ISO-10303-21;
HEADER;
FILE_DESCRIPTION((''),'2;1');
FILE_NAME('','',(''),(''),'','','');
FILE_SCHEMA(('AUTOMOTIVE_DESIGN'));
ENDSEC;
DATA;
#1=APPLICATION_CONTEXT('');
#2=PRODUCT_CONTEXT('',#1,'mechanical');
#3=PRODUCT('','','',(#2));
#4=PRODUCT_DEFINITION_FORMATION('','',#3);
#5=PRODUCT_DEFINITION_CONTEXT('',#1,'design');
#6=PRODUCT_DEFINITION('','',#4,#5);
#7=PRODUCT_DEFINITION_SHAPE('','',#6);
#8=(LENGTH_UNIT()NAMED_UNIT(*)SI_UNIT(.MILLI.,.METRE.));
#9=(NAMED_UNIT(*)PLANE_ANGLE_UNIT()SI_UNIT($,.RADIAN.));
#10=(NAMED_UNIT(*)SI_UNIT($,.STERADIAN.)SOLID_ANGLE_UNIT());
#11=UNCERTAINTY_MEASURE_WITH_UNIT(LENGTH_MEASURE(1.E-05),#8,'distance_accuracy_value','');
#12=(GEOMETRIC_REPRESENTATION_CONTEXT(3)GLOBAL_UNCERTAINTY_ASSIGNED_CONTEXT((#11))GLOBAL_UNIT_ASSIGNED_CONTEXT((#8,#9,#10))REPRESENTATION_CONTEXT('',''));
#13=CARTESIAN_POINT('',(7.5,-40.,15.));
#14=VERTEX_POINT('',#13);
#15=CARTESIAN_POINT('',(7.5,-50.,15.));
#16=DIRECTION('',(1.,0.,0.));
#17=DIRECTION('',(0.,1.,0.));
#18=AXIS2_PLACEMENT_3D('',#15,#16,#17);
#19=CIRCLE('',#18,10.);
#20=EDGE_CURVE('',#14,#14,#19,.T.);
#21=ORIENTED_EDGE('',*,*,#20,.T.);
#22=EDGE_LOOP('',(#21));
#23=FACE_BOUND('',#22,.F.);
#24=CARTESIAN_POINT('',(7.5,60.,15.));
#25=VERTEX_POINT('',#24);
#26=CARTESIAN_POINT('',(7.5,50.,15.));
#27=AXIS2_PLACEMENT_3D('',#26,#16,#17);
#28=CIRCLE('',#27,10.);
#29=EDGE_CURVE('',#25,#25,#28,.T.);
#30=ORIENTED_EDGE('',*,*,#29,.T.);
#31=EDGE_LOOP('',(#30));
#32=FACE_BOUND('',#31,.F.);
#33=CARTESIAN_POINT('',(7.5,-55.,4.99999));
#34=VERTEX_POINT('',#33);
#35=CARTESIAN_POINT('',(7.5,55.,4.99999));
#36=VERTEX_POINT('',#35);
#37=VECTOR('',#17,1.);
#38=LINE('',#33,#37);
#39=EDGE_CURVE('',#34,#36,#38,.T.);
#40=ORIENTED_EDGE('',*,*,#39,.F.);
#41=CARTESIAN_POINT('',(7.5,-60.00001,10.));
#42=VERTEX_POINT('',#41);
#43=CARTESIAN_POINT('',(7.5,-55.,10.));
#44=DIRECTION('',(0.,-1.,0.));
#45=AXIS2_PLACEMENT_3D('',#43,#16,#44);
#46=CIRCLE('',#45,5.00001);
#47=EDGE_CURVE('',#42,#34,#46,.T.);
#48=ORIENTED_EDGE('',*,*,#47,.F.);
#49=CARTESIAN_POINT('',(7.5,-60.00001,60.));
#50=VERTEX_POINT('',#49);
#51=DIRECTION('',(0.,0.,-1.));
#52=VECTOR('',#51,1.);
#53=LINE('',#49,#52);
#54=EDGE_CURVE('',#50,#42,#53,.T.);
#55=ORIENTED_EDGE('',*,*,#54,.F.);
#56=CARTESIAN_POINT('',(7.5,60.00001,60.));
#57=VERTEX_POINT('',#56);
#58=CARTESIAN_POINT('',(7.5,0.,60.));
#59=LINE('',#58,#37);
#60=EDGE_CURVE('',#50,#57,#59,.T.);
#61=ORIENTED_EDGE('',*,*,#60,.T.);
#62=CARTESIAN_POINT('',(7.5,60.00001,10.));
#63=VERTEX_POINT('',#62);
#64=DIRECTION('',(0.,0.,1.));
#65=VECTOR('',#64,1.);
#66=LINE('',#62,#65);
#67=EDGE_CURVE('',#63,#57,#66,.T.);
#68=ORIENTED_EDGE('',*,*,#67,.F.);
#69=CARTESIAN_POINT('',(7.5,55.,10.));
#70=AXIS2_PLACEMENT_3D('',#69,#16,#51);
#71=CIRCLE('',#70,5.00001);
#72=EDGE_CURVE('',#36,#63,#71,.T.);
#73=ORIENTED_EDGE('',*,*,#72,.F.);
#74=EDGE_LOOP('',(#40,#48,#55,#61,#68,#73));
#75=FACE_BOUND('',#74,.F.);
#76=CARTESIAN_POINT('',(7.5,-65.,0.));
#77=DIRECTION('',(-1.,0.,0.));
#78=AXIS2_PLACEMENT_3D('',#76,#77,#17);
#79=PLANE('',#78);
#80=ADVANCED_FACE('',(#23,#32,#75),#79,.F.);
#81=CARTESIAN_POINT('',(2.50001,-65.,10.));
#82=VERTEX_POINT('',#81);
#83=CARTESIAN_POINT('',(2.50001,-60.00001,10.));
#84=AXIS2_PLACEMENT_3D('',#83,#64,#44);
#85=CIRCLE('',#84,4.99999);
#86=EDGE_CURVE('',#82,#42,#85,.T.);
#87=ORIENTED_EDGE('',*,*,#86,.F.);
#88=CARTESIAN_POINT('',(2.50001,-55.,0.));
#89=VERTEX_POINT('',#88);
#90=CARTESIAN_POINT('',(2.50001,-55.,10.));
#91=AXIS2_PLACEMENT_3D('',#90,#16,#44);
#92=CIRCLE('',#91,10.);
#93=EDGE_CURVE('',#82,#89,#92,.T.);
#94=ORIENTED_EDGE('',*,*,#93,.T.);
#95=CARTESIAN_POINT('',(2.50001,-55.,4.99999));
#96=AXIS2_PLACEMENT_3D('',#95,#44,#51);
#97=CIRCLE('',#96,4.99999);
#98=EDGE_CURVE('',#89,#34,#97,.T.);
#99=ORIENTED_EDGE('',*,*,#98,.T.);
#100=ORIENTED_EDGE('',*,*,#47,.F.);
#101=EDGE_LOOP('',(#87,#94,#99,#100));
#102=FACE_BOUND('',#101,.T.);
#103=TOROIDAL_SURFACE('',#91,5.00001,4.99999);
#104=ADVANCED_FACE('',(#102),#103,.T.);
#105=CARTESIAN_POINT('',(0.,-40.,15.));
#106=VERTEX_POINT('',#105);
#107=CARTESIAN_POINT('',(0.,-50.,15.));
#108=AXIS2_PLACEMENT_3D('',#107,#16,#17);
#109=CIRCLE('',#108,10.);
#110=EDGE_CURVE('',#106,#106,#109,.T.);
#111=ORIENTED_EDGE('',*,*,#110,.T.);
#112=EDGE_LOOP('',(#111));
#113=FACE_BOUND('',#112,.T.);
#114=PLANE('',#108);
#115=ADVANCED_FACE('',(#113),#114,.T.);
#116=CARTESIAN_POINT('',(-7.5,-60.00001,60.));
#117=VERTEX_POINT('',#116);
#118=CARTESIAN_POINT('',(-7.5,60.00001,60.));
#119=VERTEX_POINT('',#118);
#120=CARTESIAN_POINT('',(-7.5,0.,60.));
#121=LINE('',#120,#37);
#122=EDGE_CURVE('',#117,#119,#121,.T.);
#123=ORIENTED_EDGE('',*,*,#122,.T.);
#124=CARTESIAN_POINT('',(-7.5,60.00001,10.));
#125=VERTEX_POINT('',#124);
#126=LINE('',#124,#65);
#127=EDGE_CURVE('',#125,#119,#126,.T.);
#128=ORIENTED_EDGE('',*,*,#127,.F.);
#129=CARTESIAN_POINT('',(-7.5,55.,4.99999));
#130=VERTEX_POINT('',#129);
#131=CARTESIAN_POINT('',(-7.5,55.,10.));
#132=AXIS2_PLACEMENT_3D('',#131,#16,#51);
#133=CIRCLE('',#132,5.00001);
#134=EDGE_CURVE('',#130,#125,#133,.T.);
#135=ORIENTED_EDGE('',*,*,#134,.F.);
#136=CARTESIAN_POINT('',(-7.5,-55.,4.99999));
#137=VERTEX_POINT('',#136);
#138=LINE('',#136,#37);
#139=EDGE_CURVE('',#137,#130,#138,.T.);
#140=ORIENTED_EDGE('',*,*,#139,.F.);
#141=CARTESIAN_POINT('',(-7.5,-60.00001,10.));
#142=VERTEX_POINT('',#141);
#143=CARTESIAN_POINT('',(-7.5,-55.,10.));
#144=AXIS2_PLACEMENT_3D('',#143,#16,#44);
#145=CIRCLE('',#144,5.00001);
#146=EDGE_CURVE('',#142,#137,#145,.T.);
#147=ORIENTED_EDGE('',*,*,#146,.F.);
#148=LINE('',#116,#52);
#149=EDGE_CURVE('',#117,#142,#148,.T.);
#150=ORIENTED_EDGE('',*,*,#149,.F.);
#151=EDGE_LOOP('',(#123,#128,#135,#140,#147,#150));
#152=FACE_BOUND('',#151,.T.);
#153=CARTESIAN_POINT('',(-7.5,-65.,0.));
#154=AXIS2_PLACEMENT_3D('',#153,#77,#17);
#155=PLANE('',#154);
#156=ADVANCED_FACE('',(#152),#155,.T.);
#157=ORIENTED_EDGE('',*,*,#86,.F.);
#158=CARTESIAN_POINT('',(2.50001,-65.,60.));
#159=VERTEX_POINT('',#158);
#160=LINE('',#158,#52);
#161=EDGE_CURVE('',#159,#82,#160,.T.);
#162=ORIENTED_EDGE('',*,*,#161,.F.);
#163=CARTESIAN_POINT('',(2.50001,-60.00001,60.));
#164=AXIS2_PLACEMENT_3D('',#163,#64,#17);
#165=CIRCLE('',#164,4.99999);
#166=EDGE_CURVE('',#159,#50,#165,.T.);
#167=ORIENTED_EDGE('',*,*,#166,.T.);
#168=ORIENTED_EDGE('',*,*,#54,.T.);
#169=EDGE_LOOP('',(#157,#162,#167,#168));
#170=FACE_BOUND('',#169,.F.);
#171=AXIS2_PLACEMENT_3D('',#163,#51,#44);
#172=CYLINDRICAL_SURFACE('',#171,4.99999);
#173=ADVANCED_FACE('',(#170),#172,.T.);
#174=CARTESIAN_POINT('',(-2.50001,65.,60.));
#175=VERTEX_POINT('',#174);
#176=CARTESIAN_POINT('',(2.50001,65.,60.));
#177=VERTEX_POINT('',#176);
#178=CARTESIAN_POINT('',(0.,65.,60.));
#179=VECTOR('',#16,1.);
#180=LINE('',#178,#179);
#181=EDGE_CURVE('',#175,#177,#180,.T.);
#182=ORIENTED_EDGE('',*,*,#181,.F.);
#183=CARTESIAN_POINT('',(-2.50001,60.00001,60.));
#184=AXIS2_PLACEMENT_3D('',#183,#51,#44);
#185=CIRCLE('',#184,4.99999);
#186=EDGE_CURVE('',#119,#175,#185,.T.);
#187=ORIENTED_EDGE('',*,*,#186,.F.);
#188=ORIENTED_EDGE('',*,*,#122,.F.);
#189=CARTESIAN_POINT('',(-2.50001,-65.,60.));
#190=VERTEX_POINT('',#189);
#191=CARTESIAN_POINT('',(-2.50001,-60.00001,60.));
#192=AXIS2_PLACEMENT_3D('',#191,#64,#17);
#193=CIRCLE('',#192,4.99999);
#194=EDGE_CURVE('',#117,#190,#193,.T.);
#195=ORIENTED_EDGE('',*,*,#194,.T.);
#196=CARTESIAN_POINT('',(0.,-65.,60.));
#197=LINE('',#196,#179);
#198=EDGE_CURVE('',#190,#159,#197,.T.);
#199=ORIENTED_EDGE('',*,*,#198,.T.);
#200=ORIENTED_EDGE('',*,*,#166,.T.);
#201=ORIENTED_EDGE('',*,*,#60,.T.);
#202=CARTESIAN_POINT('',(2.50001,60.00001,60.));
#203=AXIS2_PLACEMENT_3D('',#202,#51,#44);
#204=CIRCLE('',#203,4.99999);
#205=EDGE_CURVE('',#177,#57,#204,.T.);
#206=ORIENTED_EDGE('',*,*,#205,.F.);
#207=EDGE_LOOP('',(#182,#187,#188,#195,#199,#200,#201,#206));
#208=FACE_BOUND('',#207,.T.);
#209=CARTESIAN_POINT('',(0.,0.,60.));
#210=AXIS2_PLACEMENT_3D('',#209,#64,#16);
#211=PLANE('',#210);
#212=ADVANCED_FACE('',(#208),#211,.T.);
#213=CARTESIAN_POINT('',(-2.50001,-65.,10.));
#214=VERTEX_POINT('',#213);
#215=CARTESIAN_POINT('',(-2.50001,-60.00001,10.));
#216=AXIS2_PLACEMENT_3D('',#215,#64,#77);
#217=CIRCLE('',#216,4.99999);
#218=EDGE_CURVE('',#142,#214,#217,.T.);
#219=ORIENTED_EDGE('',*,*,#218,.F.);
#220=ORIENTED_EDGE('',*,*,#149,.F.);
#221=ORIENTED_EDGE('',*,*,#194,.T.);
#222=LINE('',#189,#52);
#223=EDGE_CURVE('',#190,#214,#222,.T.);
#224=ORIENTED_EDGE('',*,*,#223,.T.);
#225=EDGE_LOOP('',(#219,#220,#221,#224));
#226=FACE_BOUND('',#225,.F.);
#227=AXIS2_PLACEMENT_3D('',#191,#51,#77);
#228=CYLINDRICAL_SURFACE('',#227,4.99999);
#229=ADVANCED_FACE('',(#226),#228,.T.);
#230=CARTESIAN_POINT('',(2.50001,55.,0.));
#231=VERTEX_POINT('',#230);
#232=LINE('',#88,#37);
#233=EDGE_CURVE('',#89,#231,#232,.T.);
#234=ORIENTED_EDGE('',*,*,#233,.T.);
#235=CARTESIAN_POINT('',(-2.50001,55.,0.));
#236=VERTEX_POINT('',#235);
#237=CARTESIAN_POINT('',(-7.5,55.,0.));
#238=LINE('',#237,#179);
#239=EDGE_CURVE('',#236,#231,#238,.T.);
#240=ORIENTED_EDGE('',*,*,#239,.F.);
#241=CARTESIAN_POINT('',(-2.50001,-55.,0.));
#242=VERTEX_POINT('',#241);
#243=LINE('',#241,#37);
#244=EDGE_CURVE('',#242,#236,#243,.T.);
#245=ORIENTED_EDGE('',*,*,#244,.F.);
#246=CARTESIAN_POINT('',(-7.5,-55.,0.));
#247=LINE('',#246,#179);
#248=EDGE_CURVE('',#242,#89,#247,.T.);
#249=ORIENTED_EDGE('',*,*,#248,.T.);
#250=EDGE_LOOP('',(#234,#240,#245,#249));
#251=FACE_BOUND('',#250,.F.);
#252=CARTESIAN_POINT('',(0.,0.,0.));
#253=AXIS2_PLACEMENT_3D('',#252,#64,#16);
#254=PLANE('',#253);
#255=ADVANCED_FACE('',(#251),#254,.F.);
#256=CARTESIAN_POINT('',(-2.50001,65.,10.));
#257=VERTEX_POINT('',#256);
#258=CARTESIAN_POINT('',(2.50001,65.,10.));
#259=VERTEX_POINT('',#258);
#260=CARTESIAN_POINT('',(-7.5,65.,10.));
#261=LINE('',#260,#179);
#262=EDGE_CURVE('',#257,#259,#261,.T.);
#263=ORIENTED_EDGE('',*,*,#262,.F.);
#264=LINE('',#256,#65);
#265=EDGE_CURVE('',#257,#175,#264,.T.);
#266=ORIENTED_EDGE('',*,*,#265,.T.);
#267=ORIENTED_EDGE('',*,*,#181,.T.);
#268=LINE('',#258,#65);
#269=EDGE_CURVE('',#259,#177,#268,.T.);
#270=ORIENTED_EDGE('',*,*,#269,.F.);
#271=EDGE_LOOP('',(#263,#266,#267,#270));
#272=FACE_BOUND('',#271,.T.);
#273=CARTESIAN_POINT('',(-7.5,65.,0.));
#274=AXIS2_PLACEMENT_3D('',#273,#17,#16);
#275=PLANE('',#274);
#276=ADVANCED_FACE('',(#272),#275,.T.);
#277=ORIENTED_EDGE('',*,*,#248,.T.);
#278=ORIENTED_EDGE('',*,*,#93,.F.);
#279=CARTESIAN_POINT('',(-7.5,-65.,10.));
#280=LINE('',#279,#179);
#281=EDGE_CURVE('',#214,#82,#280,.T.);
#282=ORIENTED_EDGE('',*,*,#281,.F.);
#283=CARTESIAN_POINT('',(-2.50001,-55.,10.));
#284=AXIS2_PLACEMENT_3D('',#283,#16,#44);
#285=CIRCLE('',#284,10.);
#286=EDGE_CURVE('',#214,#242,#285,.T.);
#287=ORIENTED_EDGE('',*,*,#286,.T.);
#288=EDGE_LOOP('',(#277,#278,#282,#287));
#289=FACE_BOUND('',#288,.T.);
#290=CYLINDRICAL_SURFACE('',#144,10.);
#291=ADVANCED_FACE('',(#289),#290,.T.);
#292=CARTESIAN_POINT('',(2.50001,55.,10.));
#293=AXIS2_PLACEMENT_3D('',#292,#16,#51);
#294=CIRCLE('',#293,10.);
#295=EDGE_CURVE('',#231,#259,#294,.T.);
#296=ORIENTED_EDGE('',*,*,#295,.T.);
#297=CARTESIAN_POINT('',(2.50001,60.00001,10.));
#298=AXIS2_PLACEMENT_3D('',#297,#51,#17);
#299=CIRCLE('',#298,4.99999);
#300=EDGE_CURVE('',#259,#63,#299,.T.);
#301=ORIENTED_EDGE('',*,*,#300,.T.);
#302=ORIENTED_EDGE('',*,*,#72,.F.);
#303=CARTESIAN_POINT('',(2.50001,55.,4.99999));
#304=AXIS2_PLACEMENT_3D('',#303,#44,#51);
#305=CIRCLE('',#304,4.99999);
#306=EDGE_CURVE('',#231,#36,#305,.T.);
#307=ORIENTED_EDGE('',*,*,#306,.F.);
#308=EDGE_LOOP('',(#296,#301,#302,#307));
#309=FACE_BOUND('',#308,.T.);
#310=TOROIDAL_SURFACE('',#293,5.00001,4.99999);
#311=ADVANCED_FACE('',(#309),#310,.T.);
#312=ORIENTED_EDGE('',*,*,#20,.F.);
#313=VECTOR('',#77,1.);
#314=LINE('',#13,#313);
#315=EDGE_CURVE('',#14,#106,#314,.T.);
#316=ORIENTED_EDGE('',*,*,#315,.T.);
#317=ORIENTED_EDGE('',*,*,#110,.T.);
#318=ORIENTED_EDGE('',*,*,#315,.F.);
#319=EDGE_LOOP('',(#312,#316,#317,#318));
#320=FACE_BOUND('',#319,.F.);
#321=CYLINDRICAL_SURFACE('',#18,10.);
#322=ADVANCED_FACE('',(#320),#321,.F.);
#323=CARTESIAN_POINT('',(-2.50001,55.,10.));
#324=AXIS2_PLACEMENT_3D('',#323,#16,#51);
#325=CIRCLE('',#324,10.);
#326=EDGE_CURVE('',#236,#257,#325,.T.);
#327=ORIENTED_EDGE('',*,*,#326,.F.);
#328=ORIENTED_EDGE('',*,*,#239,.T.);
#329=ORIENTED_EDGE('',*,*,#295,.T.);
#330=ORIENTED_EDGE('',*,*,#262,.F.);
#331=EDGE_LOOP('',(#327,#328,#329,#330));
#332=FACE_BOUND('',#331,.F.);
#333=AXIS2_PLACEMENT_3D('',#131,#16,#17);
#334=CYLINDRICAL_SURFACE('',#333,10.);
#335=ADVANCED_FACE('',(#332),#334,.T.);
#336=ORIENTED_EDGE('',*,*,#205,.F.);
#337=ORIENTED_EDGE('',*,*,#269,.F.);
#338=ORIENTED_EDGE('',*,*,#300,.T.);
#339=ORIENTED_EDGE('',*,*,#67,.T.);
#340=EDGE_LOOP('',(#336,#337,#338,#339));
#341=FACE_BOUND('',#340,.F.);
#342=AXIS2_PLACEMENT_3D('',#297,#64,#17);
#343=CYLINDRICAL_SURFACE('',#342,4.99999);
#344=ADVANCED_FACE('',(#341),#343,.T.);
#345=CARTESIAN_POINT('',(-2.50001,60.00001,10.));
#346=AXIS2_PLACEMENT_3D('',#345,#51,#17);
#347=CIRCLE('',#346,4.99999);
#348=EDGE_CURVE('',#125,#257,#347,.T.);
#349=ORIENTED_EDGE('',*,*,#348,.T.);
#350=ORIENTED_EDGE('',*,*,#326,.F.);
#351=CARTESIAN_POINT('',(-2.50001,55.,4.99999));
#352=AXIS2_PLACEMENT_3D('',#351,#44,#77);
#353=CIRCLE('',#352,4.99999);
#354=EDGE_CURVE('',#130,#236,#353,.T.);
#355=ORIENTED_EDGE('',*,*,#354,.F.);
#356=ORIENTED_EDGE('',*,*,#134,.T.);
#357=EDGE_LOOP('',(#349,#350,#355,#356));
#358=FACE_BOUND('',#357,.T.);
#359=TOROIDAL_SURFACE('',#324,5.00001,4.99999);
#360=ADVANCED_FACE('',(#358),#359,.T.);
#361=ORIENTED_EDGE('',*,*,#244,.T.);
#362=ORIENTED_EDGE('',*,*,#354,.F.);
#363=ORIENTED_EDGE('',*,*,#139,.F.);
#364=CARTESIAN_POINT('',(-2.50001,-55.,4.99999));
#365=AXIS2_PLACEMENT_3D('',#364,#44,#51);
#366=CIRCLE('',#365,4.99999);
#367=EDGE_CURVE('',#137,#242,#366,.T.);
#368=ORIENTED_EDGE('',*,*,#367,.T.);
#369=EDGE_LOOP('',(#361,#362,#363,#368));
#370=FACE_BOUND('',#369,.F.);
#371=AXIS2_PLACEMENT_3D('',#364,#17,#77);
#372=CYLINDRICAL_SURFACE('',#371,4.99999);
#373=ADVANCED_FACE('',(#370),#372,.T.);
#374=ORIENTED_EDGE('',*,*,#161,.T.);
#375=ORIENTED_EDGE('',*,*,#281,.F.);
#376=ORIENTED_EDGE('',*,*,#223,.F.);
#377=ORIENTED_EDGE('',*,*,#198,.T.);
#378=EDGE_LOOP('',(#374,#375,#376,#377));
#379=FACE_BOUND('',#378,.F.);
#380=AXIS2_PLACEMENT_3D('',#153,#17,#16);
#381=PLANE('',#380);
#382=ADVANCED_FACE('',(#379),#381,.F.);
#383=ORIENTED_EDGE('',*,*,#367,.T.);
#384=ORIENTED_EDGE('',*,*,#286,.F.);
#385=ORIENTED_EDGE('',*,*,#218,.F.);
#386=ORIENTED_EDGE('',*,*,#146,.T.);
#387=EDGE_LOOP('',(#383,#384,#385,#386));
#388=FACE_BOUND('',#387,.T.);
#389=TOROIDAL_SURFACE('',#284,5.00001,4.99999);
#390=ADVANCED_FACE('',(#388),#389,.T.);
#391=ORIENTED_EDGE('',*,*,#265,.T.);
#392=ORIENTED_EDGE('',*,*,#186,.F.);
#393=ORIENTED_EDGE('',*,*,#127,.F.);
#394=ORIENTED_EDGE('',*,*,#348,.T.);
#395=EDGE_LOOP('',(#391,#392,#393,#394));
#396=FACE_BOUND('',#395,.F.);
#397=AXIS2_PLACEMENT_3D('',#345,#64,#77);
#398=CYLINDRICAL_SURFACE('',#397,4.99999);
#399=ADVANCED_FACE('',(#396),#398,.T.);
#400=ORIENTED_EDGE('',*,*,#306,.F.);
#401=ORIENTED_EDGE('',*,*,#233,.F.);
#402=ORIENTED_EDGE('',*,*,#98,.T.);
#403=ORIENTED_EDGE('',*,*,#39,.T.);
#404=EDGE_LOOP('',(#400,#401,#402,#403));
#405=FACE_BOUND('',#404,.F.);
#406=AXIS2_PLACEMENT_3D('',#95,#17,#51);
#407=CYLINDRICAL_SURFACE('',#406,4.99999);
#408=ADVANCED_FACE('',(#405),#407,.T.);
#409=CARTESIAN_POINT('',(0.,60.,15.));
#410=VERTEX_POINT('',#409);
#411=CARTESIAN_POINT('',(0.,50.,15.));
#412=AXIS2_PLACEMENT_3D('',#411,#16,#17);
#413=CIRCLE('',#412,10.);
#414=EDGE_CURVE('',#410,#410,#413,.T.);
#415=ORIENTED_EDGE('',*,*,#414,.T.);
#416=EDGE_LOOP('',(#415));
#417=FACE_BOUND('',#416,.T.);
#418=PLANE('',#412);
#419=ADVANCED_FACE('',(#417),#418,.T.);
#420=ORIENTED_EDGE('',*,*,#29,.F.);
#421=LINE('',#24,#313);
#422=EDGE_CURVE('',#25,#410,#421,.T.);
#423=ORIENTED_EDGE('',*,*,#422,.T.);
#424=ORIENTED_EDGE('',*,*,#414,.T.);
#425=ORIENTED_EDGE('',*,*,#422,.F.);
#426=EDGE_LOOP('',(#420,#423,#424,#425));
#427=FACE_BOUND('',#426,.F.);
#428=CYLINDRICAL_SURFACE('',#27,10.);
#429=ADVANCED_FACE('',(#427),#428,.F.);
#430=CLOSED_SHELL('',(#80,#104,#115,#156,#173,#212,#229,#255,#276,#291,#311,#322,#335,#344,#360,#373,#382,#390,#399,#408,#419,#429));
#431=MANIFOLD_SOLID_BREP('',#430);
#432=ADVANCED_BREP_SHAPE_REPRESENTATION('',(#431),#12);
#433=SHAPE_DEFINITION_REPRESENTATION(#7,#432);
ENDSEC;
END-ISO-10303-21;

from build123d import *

# Parameters (mm, degrees)
F0_W     = 15
F0_H     = 130
F1_DEPTH = 60
F2_R     = 10
F3_DEPTH = 7.5
F4_R     = 10
F5_R     = 4.99999


# Not quite as in the source:
# - a fillet or chamfer is up to 0.001 mm smaller than in the source, because OpenCascade refuses the exact size


with BuildPart() as f1:
    # F0 (on Top) → F1 (new body)
    with BuildSketch(Plane.XY):
        Rectangle(F0_W, F0_H)
    extrude(amount=F1_DEPTH)

    # F2 (on face) → F3 (cut)
    with BuildSketch(Plane.YZ.offset(7.5)):
        with Locations((-50, 15)):
            Circle(F2_R)
        with Locations((50, 15)):
            Circle(F2_R)
    extrude(amount=-F3_DEPTH, mode=Mode.SUBTRACT)

    # F4
    f4_edges = [f1.edges().sort_by_distance(p)[0] for p in [
        (0, -65, 0),
        (0, 65, 0),
    ]]
    fillet(f4_edges, radius=F4_R)

    # F5 (radius 5 in the source; OpenCascade refuses exactly that, so slightly less here)
    f5_edges = [f1.edges().sort_by_distance(p)[0] for p in [
        (7.5, 0, 0),
        (-7.5, 0, 0),
    ]]
    fillet(f5_edges, radius=F5_R)


solid = f1.part
